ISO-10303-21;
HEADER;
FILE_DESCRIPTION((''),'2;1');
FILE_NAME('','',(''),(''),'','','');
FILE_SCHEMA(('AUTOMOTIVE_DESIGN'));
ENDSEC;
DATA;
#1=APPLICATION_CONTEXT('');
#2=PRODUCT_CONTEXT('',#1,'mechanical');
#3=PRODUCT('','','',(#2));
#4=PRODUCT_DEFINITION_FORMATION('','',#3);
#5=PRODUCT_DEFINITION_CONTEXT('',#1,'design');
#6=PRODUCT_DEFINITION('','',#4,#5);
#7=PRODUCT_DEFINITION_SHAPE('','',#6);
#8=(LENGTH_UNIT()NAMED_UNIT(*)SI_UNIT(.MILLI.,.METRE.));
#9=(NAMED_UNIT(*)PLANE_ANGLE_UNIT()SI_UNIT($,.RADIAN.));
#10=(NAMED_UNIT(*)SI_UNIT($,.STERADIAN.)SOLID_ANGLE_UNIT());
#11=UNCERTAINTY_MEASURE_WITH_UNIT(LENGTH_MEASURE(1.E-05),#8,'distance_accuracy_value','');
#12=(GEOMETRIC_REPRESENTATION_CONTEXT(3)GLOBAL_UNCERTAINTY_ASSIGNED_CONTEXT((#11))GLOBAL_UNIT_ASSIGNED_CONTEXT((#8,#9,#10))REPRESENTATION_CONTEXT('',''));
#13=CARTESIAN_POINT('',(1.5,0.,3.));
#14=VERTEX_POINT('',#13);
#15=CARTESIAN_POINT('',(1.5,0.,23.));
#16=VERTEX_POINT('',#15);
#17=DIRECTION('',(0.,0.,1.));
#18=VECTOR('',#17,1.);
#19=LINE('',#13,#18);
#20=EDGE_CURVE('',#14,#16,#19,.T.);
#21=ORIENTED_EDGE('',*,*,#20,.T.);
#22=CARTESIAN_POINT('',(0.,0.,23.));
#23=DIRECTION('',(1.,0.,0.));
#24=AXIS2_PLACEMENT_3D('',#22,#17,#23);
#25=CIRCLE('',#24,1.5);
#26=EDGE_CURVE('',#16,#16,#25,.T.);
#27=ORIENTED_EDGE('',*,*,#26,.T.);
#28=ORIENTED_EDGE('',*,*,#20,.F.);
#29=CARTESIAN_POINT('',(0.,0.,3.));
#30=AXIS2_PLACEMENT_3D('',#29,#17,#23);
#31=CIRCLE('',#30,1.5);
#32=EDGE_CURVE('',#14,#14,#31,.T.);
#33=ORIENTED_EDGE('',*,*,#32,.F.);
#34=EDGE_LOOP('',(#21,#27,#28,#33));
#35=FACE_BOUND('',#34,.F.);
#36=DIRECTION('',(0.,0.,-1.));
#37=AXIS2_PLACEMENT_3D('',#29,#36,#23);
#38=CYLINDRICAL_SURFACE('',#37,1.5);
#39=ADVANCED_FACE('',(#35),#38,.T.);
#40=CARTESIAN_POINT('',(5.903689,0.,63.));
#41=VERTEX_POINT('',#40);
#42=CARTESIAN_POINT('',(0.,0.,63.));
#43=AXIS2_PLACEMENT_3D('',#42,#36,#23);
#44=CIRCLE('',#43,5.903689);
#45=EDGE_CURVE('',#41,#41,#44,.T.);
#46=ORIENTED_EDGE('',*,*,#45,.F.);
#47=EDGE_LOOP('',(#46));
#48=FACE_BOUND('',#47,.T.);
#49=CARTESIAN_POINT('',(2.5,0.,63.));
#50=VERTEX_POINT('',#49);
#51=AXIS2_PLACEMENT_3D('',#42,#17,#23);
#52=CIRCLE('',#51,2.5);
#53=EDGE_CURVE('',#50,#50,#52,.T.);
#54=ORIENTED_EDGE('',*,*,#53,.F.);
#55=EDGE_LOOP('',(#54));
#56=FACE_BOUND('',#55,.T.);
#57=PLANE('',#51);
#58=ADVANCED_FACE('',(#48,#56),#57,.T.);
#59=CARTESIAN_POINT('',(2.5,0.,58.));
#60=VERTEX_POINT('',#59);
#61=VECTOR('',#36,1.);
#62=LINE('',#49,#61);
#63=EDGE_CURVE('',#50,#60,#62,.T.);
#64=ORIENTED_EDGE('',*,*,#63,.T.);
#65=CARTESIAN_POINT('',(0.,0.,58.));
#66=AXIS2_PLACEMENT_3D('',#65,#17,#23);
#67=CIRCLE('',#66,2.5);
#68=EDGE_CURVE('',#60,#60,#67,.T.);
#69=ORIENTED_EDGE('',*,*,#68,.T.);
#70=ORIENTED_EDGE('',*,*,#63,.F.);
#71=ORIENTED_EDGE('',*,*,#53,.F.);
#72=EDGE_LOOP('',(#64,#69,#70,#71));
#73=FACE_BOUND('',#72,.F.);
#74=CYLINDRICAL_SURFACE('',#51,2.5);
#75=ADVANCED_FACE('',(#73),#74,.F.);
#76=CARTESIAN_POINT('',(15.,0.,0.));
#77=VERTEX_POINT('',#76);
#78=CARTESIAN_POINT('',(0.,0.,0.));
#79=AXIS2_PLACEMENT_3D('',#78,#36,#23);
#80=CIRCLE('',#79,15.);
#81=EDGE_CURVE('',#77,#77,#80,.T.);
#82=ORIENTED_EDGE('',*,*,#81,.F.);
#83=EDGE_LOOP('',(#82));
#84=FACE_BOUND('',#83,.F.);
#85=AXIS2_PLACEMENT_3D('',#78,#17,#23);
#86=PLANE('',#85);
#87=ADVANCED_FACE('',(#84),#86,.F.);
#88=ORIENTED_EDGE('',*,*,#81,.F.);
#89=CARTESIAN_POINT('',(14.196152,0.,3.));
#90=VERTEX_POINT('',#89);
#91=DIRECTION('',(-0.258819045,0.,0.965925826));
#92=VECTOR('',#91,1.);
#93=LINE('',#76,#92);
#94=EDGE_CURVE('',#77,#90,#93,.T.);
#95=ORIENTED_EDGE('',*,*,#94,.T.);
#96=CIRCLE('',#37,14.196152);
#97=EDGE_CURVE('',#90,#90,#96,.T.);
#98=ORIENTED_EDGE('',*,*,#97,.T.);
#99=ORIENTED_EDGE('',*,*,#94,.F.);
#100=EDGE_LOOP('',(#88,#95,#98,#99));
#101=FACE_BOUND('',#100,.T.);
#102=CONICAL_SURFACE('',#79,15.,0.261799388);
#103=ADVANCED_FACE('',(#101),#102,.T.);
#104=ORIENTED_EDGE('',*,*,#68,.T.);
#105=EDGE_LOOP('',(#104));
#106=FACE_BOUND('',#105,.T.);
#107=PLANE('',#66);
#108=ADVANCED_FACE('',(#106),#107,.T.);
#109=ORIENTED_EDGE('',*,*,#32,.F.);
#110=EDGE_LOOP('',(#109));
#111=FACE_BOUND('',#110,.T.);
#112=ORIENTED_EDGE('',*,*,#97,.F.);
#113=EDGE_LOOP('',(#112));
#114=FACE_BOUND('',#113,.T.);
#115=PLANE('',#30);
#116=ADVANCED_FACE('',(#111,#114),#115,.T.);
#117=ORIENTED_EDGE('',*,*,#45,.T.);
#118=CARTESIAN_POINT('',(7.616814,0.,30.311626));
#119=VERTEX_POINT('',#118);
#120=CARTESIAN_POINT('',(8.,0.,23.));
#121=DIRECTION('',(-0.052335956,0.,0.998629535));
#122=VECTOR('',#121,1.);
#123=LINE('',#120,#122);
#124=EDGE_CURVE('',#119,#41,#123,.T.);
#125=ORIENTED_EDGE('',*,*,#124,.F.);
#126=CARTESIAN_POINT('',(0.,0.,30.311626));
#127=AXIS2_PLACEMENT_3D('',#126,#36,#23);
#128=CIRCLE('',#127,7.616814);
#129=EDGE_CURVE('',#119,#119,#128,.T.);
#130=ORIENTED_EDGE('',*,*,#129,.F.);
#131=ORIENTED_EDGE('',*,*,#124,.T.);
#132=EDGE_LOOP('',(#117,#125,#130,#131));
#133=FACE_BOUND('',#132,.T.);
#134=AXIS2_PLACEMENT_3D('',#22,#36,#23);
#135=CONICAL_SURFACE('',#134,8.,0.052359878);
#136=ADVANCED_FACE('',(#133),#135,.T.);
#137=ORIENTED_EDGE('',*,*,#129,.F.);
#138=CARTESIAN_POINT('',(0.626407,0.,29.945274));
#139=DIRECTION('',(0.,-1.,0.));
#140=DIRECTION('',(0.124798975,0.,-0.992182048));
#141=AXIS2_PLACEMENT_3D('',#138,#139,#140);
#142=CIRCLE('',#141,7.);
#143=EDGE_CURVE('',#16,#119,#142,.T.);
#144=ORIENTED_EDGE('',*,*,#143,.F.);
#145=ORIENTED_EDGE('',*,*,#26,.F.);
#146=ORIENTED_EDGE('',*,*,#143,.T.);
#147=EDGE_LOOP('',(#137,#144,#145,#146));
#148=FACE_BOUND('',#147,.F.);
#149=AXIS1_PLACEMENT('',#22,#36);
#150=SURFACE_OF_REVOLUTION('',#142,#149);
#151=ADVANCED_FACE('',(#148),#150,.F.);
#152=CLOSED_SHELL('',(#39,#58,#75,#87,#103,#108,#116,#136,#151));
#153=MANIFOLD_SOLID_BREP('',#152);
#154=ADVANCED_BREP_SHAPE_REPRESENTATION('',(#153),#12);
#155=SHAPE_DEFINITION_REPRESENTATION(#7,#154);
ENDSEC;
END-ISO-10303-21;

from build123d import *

# Parameters (mm, degrees)
F0_R     = 15
F1_DEPTH = 3
F1_TAPER = 15
F2_R     = 1.5
F3_DEPTH = 20
F4_R     = 8
F5_DEPTH = 40
F5_TAPER = 3
F6_R     = 2.5
F7_DEPTH = 5


# Not quite as in the source:
# - a fillet or chamfer that OpenCascade refuses, or shapes differently, is made with other operations: its cross-section is extruded or revolved along the edge and cut away or added


with BuildPart() as f1:
    # F0 (on Top) → F1 (new body)
    with BuildSketch(Plane.XY):
        Circle(F0_R)
    extrude(amount=F1_DEPTH, taper=F1_TAPER)

    # F2 (on face) → F3 (join)
    with BuildSketch(Plane.XY.offset(3)):
        Circle(F2_R)
    extrude(amount=F3_DEPTH)

    # F4 (on face) → F5 (join)
    with BuildSketch(Plane.XY.offset(23)):
        Circle(F4_R)
    extrude(amount=F5_DEPTH, taper=F5_TAPER)

    # F6 (on face) → F7 (cut)
    with BuildSketch(Plane.XY.offset(63)):
        Circle(F6_R)
    extrude(amount=-F7_DEPTH, mode=Mode.SUBTRACT)

    # F8: fillet of radius 7 on 1 edges, made by hand

    # F8_s1 → F8_t2 (revolve, cut)
    with BuildSketch(Plane.XZ):
        with BuildLine():
            ThreePointArc((1.5, 23), (5.9953541002, 25.4536811979), (7.6168139169, 30.3116260276))
            Line((7.6168139169, 30.3116260276), (8, 23))
            Line((8, 23), (1.5, 23))
        make_face()
    revolve(axis=Axis((0, 0, 23), (0, 0, -1)), mode=Mode.SUBTRACT)


solid = f1.part
